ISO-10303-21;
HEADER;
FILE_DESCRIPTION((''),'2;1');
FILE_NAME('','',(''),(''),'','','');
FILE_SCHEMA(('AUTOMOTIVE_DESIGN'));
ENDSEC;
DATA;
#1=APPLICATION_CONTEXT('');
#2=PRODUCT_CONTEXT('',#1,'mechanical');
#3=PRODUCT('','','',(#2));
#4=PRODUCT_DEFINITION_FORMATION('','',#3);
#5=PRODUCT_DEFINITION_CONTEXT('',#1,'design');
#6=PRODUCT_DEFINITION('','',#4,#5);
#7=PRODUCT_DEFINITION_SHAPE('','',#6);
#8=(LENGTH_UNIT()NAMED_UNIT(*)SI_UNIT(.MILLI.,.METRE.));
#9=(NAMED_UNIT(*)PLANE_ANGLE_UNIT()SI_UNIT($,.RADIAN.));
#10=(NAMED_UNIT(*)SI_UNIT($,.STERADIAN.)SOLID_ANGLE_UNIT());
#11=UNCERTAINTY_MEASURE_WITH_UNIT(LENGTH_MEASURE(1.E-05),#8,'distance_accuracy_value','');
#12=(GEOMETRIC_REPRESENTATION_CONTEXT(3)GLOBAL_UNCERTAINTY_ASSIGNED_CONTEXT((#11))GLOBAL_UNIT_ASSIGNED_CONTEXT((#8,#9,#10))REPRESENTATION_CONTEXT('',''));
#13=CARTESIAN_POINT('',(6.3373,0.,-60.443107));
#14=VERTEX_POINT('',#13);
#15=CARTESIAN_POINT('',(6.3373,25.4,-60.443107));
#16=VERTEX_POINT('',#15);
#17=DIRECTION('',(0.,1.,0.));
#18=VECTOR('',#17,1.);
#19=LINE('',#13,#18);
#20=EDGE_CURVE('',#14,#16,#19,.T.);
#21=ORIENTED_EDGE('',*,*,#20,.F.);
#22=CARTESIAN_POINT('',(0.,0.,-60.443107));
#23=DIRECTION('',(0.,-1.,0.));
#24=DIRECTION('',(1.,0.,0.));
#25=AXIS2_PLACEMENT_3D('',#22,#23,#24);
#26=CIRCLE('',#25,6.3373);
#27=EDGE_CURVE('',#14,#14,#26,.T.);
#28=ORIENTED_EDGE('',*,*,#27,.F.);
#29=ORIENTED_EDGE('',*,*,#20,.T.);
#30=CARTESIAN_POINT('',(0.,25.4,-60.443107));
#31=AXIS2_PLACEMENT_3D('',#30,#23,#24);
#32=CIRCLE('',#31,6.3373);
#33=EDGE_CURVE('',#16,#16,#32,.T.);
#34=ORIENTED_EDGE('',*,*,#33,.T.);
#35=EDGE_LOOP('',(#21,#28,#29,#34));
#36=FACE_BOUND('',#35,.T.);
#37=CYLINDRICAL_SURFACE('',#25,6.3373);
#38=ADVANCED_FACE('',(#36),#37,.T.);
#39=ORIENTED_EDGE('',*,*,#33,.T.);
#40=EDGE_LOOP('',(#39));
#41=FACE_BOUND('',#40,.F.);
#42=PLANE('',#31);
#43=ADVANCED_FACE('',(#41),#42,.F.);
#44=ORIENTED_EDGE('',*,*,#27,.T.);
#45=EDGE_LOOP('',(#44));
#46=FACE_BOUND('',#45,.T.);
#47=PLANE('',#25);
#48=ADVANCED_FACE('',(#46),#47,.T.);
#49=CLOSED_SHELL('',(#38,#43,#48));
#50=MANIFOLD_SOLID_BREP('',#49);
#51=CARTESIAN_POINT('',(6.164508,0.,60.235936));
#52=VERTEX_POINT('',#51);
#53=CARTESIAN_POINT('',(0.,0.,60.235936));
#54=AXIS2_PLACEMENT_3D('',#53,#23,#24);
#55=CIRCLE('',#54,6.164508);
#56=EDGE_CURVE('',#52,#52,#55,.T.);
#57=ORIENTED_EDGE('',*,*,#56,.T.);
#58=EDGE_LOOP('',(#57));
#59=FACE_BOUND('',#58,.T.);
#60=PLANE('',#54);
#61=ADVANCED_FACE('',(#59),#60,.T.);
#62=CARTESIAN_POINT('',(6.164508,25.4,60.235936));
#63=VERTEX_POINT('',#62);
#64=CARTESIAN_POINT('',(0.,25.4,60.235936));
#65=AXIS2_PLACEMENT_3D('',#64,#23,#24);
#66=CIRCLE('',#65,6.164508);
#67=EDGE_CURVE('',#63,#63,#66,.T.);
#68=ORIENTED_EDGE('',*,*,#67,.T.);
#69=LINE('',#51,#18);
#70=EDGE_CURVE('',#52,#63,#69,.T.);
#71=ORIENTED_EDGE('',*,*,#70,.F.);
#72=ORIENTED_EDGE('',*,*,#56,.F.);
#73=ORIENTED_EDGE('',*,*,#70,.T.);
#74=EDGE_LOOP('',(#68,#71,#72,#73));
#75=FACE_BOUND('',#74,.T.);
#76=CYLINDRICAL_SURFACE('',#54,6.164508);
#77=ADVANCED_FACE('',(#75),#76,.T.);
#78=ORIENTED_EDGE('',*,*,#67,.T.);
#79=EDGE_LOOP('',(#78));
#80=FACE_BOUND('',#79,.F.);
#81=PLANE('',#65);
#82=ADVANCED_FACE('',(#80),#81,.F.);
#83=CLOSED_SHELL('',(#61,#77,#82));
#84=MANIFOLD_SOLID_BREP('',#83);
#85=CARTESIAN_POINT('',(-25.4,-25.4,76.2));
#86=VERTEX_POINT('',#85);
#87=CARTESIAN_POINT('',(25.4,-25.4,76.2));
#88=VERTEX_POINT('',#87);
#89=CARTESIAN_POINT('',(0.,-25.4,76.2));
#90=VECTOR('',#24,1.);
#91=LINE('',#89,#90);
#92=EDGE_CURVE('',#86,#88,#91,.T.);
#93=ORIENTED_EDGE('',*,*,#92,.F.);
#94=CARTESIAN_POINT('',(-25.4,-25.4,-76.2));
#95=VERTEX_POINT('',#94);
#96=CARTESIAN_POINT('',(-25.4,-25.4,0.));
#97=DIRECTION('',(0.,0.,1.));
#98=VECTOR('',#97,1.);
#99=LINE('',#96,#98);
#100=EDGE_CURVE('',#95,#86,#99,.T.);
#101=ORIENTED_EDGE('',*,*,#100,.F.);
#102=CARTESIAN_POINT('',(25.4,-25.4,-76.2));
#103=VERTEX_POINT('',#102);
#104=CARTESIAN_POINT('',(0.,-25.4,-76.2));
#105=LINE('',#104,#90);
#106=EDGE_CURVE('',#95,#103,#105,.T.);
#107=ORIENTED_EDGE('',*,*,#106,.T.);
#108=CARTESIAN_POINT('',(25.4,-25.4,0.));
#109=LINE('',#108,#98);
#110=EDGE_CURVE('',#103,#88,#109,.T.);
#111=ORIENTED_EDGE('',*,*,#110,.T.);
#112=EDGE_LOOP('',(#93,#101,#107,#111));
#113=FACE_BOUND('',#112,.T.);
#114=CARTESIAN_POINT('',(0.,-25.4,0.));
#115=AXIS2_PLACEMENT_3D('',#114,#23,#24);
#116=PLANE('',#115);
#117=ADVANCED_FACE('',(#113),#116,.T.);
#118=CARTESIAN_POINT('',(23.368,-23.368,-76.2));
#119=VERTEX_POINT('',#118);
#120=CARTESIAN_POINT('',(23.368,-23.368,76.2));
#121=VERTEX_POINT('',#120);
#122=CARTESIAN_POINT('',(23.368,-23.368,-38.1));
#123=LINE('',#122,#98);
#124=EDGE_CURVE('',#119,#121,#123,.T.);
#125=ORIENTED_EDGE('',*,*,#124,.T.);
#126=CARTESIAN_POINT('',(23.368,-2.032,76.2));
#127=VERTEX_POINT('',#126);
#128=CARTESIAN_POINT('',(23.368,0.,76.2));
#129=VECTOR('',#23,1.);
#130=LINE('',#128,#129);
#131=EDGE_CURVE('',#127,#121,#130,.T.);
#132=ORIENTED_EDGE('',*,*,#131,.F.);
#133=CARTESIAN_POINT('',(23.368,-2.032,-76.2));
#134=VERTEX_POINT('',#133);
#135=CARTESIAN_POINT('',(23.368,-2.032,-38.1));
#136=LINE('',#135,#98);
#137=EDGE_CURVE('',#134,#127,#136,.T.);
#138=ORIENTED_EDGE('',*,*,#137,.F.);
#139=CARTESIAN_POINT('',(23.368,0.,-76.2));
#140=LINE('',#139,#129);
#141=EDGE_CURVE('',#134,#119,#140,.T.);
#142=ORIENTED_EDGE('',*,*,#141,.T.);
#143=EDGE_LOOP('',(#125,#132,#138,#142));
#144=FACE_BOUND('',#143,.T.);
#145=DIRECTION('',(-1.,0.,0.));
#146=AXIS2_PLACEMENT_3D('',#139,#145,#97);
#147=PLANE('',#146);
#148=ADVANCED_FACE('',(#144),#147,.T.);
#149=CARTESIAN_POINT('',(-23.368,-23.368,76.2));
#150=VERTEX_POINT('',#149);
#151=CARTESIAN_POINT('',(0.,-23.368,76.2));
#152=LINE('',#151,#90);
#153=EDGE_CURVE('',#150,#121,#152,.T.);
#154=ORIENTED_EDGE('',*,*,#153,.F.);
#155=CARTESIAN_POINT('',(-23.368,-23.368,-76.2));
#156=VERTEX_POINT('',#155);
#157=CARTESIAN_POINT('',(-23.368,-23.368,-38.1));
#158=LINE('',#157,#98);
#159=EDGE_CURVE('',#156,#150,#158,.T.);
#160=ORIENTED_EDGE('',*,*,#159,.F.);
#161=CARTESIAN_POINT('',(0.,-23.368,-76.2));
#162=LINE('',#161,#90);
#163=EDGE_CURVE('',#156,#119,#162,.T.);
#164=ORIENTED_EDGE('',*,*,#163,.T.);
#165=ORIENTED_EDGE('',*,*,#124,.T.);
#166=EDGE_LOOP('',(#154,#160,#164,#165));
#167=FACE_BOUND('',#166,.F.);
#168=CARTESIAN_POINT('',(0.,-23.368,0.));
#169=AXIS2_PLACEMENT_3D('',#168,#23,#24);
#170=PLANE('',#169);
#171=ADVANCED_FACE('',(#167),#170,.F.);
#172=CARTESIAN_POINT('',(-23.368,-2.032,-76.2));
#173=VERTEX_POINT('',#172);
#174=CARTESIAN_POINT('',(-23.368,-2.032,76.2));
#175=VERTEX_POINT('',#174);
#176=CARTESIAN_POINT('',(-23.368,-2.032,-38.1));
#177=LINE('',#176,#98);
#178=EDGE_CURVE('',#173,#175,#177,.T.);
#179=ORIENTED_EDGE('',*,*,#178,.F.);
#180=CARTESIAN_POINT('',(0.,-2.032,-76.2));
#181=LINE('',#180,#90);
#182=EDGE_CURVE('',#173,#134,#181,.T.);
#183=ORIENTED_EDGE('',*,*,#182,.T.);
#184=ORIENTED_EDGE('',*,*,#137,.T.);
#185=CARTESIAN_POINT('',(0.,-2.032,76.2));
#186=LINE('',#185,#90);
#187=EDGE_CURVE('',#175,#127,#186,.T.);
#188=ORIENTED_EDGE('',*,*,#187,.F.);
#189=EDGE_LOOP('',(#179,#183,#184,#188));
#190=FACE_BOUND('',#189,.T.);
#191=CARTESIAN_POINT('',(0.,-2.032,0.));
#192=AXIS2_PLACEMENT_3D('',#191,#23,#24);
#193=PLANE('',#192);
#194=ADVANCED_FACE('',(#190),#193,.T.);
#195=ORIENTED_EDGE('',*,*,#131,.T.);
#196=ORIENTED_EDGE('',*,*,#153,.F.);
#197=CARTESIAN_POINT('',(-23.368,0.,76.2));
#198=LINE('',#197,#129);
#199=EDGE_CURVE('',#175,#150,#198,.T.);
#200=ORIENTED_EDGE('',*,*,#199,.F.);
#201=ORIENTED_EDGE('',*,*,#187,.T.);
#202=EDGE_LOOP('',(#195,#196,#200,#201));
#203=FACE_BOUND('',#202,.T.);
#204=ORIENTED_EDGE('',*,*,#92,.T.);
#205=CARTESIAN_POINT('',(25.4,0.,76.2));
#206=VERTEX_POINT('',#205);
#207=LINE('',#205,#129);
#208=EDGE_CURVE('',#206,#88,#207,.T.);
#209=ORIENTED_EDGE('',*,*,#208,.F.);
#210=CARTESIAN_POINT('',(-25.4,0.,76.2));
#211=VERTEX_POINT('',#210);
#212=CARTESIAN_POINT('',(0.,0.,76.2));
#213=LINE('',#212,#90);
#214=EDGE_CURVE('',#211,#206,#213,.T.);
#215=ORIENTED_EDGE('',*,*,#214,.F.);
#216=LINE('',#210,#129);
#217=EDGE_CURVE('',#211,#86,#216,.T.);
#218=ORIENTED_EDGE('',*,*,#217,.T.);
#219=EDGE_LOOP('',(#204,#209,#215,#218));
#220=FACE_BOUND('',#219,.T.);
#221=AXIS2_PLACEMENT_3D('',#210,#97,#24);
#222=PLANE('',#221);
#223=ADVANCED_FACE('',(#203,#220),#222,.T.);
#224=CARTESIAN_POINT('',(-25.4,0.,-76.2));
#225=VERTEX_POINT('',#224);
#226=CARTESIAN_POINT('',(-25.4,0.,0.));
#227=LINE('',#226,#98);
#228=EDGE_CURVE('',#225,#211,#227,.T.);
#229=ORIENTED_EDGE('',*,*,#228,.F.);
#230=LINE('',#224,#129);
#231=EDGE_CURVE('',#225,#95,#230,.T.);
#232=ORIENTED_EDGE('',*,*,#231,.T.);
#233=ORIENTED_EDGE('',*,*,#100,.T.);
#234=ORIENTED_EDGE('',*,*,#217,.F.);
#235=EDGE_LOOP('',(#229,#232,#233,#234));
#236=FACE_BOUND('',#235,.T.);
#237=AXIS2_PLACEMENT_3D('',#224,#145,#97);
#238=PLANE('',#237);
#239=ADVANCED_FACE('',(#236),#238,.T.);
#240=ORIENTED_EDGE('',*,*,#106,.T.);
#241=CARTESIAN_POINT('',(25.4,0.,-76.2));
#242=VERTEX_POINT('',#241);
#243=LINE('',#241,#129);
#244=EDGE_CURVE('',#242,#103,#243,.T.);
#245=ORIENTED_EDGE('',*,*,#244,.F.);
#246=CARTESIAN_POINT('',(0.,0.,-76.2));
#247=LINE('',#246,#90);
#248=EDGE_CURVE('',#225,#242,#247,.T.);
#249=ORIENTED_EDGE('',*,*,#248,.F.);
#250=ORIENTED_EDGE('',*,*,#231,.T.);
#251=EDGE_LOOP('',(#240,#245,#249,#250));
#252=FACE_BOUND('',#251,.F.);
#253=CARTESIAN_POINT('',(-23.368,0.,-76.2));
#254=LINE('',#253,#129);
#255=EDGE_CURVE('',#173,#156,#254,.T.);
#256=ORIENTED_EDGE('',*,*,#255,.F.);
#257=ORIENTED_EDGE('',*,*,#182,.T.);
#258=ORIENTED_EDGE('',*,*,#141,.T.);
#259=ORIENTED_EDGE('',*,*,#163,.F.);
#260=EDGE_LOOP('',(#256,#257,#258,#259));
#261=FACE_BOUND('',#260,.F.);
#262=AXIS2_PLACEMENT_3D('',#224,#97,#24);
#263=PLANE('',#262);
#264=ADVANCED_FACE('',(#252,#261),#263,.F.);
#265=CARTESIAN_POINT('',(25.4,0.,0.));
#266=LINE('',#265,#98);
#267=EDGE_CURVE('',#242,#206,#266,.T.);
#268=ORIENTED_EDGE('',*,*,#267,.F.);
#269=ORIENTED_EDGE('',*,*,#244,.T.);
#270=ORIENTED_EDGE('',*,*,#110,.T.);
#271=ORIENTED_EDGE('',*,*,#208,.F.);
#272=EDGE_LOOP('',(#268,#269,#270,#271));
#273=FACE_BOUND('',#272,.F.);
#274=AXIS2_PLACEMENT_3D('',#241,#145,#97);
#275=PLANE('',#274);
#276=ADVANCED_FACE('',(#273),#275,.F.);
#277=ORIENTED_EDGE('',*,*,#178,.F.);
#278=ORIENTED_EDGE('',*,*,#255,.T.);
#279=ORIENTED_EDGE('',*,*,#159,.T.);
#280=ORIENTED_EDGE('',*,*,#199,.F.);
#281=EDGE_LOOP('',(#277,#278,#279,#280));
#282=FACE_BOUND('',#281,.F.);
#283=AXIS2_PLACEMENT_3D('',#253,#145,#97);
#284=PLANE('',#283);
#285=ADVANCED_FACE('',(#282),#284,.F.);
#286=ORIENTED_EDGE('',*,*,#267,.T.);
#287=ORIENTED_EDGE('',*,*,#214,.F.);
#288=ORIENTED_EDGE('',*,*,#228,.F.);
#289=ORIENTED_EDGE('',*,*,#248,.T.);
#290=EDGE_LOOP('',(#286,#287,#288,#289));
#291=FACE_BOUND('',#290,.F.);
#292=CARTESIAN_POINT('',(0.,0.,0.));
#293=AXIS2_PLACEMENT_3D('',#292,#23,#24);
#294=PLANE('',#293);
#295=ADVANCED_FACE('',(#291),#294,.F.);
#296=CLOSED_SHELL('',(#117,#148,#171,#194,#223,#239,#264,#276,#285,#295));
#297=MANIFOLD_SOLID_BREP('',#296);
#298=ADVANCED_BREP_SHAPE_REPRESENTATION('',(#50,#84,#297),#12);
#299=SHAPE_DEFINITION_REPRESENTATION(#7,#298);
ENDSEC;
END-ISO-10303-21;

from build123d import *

# Parameters (mm, degrees)
F0_R     = 6.3373
F1_DEPTH = 25.4
F0_R_2   = 6.1645080195
F2_W     = 50.8
F2_H     = 152.4
F3_DEPTH = 25.4
F4_T     = -2.032


# Not quite as in the source:
# - a feature names something its author has since deleted; it is built from what else it names


with BuildPart() as f1:
    # F0 (on Front) → F1 (new body)
    with BuildSketch(Plane.XZ):
        with Locations((0, -60.4431070387)):
            Circle(F0_R)
    extrude(amount=-F1_DEPTH)


with BuildPart() as f1b:
    # F0 (on Front) → F1, piece 2 (new body)
    with BuildSketch(Plane.XZ):
        with Locations((0, 60.2359361947)):
            Circle(F0_R_2)
    extrude(amount=-F1_DEPTH)


with BuildPart() as f3:
    # F2 (on Front) → F3 (new body)
    with BuildSketch(Plane.XZ):
        Rectangle(F2_W, F2_H)
    extrude(amount=F3_DEPTH)

    # F4
    f4_openings = [f3.faces().sort_by_distance(p)[0] for p in [
        (0, -12.7, 76.2),
        (0, -12.7, -76.2),
    ]]
    offset(amount=F4_T, openings=f4_openings)


solid = Compound([f1.part, f1b.part, f3.part])
